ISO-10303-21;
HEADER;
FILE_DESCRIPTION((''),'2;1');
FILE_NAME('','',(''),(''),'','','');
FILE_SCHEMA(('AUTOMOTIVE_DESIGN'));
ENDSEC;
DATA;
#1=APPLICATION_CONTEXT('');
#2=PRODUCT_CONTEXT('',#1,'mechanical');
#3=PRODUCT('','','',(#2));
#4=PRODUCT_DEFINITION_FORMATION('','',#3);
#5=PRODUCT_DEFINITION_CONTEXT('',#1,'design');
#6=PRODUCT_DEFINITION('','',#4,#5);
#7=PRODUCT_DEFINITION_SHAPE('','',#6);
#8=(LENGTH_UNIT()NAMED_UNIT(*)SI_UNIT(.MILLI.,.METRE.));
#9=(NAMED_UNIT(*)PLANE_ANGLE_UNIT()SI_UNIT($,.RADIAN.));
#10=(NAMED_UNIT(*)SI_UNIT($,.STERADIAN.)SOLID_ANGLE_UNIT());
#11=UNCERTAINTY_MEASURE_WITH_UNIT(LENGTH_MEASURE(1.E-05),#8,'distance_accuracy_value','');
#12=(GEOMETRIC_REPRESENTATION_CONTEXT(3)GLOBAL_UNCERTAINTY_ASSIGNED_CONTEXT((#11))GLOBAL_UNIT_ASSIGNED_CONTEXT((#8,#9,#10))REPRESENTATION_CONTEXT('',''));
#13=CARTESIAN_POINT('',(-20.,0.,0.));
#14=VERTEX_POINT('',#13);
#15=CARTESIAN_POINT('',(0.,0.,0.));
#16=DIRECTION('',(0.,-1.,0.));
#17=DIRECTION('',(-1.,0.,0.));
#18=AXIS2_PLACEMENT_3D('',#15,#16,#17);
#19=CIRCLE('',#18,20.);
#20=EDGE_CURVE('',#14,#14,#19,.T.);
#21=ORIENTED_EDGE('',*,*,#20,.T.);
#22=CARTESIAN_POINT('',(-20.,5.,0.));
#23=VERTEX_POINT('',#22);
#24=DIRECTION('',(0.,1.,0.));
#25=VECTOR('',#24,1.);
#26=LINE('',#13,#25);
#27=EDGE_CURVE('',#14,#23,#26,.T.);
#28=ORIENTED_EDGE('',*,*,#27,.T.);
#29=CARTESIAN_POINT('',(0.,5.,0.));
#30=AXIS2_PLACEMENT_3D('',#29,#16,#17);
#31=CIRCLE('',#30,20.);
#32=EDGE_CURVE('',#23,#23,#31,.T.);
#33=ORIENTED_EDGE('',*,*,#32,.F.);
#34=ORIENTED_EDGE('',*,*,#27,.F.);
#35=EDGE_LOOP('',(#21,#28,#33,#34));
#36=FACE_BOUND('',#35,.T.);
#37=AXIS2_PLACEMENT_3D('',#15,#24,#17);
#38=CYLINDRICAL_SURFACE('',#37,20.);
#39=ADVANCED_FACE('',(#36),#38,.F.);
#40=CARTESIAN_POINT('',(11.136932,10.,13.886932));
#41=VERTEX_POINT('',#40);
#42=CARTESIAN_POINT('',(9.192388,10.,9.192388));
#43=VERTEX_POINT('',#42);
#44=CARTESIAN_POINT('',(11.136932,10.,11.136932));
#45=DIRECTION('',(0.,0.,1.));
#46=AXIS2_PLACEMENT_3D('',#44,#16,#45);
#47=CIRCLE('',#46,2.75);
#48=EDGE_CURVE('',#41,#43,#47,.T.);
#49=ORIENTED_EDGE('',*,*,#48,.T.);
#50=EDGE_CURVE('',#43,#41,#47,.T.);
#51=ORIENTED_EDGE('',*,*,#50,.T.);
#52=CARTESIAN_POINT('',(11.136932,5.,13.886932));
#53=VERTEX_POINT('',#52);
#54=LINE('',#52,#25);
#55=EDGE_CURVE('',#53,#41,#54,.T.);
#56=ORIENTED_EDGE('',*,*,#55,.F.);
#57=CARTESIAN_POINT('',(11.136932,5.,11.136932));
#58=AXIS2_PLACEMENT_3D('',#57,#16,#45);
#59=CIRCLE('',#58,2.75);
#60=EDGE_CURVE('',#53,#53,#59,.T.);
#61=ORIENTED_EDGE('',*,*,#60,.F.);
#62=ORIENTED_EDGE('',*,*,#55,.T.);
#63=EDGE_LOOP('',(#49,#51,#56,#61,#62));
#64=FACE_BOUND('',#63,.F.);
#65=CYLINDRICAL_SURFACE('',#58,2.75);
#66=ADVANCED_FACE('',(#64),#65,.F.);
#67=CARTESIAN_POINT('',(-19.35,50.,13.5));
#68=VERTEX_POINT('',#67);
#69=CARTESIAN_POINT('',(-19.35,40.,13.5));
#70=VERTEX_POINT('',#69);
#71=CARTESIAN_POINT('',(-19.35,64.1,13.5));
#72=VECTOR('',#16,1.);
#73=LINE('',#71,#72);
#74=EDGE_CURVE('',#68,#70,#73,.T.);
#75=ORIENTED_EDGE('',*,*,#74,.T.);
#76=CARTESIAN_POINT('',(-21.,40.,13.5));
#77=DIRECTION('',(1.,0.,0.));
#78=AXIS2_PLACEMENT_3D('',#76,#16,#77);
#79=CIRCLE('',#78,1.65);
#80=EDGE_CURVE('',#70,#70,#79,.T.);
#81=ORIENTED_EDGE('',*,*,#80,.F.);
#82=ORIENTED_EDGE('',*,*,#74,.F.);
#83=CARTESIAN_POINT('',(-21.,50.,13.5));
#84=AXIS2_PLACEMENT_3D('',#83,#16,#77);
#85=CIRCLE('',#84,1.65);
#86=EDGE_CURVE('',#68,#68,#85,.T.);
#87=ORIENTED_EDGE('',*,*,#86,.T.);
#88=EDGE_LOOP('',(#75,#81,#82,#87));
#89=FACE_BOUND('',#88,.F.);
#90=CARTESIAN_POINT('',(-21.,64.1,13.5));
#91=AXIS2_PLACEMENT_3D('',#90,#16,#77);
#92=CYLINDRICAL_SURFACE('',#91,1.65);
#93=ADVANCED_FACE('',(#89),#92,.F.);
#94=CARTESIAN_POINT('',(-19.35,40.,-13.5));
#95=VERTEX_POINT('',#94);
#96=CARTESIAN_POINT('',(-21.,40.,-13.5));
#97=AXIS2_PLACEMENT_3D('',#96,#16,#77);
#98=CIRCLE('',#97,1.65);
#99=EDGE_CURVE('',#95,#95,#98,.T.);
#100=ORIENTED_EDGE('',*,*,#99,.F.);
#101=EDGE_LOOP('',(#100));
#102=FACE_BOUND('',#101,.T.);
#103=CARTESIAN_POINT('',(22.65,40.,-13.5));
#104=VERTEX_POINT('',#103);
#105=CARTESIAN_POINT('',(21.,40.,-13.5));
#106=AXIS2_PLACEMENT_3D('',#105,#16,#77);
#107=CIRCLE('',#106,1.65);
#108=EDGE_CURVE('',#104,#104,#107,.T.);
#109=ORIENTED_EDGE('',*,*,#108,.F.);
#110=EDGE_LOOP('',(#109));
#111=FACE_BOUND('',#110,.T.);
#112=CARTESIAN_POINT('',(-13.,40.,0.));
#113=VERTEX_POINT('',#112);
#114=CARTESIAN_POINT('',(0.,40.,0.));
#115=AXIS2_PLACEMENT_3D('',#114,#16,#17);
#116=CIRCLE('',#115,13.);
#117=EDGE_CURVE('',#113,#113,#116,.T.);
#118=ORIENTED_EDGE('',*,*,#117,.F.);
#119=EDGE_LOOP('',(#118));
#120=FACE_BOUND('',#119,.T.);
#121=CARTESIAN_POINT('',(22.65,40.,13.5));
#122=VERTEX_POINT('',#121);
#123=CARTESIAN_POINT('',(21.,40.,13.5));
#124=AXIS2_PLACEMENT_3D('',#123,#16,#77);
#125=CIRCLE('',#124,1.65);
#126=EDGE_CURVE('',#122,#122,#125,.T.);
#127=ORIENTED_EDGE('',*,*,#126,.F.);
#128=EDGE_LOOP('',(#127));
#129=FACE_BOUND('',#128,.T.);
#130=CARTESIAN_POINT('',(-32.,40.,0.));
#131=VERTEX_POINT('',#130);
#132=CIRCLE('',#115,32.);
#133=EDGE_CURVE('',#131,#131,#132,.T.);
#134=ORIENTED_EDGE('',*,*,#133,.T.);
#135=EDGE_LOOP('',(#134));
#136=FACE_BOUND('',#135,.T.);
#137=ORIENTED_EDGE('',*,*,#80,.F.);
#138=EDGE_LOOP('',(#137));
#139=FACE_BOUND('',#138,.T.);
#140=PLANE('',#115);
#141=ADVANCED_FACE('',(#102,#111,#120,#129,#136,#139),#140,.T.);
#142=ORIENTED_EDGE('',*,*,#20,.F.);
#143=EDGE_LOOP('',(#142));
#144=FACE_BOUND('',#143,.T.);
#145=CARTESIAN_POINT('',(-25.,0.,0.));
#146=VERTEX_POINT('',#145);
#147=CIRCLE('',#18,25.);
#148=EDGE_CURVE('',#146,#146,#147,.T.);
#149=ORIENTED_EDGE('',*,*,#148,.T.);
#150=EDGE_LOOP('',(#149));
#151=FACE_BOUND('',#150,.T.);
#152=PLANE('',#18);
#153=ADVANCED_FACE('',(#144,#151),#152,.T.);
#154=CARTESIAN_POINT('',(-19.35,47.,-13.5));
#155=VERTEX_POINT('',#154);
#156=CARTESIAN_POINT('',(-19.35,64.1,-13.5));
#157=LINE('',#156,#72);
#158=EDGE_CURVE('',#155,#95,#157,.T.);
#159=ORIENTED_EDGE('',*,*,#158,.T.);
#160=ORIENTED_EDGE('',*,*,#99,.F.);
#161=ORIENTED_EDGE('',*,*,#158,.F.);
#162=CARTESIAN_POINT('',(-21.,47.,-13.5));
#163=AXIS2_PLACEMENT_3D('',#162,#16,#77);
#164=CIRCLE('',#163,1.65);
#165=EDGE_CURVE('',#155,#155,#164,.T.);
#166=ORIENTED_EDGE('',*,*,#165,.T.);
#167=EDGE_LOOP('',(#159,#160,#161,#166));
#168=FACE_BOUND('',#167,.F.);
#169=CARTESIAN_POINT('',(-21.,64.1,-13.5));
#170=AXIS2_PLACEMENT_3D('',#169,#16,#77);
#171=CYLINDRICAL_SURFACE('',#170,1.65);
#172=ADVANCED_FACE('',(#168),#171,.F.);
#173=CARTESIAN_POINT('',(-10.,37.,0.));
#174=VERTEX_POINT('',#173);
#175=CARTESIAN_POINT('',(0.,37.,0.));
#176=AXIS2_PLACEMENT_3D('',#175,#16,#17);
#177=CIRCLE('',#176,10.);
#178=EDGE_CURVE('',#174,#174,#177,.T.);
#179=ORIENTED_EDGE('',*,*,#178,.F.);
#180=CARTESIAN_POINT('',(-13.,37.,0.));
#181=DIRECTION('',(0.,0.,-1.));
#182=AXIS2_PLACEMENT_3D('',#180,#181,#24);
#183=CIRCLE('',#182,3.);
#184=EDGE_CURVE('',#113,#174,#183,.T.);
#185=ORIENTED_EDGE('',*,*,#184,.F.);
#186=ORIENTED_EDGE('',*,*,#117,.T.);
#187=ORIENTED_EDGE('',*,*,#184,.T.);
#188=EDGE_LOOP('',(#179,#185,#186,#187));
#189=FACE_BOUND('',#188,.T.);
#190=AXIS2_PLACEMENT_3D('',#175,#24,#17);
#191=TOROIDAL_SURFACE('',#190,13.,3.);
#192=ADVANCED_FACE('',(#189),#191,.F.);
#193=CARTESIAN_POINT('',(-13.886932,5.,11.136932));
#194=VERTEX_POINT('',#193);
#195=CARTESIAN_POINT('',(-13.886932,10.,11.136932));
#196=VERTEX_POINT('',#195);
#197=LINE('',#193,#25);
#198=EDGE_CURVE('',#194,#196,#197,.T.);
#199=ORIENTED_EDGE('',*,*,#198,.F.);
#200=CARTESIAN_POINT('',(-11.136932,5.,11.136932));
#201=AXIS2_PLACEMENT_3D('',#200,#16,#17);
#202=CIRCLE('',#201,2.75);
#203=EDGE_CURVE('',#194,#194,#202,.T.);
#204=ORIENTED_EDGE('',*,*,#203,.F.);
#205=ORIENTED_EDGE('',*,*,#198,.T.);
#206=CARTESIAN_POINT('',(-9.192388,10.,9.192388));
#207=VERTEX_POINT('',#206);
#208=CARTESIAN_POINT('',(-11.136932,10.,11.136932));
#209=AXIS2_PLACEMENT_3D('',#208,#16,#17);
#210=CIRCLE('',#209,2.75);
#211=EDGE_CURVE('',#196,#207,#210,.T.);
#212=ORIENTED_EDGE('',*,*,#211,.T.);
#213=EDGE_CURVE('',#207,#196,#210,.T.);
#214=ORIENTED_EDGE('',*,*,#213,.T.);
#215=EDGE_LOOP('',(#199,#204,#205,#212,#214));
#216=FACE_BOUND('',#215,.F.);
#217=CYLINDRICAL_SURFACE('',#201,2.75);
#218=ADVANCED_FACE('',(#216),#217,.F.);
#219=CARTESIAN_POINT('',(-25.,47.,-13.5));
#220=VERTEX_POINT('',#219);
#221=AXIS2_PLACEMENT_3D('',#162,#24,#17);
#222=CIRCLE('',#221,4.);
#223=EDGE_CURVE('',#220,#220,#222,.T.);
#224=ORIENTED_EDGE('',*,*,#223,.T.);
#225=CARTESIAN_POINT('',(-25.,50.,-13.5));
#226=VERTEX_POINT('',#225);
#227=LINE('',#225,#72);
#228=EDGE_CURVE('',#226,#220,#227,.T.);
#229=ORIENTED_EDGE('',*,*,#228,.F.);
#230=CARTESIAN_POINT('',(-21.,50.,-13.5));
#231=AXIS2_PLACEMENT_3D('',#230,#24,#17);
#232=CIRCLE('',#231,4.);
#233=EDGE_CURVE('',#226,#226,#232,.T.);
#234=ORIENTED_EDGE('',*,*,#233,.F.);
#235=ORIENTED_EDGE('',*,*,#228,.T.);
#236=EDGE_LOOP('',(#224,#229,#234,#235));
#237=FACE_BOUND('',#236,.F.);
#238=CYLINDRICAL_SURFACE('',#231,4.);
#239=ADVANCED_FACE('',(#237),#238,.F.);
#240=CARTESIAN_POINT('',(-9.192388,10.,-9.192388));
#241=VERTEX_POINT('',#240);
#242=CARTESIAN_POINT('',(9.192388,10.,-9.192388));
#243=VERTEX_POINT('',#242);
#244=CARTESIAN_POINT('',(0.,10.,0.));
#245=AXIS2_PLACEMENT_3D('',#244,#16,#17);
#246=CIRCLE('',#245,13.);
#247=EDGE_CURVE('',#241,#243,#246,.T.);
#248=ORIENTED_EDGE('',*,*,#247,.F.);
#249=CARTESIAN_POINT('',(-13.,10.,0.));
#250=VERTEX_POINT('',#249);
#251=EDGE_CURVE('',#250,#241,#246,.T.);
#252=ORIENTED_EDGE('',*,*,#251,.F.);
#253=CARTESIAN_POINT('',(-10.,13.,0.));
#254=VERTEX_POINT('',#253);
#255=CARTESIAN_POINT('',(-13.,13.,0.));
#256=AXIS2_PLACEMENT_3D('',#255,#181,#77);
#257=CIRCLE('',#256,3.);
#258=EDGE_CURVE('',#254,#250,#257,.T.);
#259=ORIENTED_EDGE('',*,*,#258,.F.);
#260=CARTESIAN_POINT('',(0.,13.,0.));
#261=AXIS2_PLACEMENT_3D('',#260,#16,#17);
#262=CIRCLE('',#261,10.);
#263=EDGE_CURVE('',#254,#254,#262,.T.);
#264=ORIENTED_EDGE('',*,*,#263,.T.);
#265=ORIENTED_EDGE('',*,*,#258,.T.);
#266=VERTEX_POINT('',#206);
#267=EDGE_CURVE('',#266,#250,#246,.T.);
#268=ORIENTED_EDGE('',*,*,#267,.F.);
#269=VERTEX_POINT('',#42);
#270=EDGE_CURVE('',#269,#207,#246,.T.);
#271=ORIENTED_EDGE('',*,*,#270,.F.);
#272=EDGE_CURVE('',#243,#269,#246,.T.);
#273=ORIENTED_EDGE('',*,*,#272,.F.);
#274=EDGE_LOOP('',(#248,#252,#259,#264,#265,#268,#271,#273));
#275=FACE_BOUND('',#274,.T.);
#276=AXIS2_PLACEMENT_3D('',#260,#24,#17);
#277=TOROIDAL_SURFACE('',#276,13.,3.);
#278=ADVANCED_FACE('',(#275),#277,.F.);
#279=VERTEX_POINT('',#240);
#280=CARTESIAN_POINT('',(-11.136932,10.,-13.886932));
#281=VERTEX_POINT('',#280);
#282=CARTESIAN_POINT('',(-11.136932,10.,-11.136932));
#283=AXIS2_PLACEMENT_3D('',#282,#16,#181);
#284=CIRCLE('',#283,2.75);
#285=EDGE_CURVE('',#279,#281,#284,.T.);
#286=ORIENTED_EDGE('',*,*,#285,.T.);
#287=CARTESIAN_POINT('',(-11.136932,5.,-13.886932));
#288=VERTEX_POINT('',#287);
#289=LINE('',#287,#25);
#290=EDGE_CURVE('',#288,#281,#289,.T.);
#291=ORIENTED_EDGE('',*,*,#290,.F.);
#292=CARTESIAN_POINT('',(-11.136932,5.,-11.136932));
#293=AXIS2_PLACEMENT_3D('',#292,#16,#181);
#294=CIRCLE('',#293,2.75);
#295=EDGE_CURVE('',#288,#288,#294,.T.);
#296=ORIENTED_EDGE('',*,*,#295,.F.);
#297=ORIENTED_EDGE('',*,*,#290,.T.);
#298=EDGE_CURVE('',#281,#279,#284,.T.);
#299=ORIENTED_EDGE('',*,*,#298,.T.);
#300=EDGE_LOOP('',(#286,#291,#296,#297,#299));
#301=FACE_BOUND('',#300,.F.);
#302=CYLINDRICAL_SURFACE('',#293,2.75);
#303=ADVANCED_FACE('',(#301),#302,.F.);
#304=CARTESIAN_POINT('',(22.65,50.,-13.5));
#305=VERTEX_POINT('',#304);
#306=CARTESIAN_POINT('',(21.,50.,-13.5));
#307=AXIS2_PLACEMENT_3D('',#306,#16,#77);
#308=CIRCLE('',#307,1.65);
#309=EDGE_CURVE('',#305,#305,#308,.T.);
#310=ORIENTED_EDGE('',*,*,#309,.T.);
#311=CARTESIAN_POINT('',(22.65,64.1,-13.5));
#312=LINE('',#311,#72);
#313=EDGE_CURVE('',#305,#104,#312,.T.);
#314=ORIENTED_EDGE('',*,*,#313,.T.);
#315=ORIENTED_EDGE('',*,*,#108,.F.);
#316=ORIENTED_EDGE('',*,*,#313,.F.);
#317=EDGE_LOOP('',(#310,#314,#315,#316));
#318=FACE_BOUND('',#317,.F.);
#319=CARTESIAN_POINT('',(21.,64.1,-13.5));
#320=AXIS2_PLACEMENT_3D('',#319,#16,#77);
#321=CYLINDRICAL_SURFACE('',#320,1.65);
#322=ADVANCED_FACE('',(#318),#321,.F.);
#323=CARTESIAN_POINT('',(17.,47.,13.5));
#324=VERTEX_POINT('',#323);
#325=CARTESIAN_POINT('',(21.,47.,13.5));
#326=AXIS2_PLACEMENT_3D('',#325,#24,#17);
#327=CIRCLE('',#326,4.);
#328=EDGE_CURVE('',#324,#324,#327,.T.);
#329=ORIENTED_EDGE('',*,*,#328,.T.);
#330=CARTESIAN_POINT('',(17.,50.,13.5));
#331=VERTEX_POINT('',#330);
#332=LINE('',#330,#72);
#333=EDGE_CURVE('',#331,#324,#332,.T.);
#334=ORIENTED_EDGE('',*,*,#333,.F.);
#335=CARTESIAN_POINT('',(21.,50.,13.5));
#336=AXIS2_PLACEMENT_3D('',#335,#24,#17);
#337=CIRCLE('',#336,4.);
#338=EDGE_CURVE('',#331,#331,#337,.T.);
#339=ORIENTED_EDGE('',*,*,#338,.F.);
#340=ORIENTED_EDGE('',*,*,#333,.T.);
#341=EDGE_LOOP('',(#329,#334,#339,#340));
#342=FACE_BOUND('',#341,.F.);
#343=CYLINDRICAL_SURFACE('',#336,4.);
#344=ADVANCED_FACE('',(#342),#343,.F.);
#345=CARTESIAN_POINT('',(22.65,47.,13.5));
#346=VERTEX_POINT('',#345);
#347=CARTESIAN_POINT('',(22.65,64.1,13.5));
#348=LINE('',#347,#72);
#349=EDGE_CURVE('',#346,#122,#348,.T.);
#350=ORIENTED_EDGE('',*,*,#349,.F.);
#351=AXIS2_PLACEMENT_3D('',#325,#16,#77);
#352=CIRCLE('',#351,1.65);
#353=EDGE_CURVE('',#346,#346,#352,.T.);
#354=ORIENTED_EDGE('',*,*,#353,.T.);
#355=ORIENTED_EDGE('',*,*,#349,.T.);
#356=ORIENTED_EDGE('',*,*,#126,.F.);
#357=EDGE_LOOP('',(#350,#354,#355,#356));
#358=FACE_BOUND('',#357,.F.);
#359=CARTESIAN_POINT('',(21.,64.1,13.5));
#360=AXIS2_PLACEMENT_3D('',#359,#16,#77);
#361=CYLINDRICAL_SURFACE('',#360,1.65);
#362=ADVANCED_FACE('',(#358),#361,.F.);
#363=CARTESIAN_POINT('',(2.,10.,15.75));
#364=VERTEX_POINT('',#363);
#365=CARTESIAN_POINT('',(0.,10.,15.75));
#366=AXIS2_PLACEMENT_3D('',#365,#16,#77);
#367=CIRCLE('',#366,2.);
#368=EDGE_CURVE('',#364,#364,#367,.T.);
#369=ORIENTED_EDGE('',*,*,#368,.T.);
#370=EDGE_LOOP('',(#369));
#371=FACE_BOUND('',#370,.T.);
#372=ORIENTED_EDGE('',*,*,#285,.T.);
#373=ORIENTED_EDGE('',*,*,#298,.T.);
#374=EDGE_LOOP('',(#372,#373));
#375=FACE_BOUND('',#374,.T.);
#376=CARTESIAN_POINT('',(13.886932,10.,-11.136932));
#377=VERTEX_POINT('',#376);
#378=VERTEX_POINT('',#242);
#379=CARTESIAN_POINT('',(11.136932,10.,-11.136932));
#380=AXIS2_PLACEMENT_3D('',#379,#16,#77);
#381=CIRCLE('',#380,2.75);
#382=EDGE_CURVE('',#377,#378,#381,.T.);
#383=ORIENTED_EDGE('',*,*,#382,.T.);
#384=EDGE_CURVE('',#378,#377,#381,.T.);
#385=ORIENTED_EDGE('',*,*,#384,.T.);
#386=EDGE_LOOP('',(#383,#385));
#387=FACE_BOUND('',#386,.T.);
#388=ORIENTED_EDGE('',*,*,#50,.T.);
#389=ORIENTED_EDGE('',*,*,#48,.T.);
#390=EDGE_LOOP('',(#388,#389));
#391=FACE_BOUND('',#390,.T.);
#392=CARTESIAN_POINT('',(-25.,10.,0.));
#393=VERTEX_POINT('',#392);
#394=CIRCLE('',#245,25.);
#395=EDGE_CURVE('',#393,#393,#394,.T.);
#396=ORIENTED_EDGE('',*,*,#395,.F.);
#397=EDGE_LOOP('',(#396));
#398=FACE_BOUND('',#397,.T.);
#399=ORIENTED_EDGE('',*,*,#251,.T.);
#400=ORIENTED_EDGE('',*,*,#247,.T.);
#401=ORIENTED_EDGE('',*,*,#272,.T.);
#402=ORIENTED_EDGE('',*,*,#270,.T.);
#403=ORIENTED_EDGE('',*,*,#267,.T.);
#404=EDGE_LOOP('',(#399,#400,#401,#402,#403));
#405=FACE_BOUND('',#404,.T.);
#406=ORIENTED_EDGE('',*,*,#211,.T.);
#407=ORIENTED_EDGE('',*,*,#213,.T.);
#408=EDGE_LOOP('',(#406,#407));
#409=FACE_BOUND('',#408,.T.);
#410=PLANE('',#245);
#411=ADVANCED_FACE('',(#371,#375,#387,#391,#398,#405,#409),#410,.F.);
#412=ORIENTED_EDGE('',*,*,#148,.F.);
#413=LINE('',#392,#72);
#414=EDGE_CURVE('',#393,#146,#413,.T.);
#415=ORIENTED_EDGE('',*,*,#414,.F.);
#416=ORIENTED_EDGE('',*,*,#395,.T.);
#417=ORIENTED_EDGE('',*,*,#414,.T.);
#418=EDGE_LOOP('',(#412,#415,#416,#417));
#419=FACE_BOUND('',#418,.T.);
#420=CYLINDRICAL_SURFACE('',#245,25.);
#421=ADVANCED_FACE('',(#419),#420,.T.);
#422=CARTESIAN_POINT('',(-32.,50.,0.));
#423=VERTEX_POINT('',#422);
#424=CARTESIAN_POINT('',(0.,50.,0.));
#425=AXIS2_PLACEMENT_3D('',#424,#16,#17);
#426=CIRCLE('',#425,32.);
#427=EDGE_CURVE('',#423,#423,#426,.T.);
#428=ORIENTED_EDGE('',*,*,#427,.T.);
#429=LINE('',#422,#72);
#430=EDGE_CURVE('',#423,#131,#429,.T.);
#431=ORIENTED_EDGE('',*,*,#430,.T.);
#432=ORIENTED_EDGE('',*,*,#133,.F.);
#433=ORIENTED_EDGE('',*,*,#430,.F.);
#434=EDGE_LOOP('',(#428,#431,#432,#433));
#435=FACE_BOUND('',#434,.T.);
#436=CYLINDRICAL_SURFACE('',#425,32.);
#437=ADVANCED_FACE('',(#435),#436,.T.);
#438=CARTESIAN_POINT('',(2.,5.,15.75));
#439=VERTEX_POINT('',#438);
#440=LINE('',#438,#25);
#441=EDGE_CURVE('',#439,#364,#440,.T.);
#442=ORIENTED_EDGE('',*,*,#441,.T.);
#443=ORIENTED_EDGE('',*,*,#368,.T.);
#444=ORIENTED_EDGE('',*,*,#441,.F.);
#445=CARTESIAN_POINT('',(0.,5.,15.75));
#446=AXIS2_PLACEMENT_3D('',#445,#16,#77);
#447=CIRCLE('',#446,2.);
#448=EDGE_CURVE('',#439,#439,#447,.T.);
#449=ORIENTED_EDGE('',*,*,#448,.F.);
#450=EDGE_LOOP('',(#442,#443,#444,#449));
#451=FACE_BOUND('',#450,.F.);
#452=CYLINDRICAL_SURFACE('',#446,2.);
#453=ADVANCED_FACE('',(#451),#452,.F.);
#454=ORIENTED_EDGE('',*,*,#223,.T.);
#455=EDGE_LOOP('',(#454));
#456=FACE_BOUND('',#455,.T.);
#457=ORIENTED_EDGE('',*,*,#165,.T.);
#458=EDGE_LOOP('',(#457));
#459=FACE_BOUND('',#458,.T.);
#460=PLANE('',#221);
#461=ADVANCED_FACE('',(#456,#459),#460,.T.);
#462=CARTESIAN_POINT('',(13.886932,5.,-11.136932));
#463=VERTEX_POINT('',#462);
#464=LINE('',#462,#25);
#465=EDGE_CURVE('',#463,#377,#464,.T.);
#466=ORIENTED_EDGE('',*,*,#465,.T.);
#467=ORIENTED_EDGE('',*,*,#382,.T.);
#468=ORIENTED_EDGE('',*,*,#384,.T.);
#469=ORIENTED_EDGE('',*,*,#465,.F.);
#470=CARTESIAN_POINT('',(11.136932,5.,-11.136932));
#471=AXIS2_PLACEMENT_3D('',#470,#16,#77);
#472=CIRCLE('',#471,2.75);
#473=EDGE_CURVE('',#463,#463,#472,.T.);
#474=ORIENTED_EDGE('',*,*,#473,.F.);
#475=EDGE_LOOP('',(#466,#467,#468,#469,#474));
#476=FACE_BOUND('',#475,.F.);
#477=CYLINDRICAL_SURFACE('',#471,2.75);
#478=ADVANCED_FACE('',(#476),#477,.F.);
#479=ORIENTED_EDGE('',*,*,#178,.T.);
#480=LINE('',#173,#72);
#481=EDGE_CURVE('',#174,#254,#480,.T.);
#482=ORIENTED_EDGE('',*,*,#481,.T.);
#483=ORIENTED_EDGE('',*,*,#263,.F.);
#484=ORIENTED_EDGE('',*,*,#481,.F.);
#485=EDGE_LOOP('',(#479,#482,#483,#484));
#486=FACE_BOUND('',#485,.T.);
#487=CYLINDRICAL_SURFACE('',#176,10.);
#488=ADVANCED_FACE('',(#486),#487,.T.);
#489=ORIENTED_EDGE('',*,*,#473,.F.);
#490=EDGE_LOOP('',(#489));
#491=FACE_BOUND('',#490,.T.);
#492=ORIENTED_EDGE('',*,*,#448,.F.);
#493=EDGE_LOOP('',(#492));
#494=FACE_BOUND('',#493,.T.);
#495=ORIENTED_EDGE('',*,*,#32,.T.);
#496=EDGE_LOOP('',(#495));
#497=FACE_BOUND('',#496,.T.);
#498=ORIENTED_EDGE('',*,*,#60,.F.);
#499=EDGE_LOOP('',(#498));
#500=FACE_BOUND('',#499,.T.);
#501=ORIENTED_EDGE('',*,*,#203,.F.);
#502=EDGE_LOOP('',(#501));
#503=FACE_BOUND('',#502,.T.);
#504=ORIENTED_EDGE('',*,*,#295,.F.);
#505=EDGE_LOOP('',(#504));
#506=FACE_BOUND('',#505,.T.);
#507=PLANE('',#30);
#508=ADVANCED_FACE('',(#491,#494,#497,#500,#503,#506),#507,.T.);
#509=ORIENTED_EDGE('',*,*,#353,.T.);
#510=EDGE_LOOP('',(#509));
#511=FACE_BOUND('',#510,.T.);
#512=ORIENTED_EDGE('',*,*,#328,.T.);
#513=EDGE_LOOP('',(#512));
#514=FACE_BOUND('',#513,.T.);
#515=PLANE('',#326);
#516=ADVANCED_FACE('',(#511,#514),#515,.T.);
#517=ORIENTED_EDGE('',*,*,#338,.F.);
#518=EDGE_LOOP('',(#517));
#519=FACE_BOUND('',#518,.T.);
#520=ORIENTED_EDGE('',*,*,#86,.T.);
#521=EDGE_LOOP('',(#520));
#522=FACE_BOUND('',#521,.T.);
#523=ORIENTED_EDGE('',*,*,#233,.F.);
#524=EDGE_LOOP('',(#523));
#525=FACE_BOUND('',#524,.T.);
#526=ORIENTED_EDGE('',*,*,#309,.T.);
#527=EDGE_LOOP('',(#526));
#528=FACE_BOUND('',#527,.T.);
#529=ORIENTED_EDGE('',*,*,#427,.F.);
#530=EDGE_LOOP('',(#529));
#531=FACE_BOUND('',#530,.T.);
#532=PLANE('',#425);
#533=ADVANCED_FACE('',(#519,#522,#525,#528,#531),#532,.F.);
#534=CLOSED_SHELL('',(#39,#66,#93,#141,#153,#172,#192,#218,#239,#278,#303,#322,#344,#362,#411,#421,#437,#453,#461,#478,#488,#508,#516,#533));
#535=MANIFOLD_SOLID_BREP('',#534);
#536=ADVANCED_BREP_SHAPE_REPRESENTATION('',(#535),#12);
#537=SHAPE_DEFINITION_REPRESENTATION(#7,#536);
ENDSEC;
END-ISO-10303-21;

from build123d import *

# Parameters (mm, degrees)
F3_D            = 3.3
F3_DEPTH        = 14.1
F3_TIP          = 0.9914200214
F2_R            = 4
F4_DEPTH        = 3
F5_R            = 2.75
F6_DEPTH        = 25
F6_COPIES_COUNT = 4
F8_R            = 2
F9_DEPTH        = 25


# Not quite as in the source:
# - a pattern or mirror of a feature is missing from the dataset's text; its kind, count and spacing are read off the source's solid


with BuildPart() as f1:
    # F0 (on Top) → F1 (revolve)
    with BuildSketch(Plane.XY):
        with BuildLine():
            Line((-25, 0), (-20, 0))
            Line((-20, 0), (-20, 5))
            Line((-20, 5), (0, 5))
            Line((0, 5), (0, 50))
            Line((0, 50), (-32, 50))
            Line((-32, 50), (-32, 40))
            Line((-32, 40), (-13, 40))
            ThreePointArc((-13, 40), (-10.8786796564, 39.1213203436), (-10, 37))
            Line((-10, 37), (-10, 13))
            ThreePointArc((-10, 13), (-10.8786796564, 10.8786796564), (-13, 10))
            Line((-13, 10), (-25, 10))
            Line((-25, 10), (-25, 0))
        make_face()
    revolve(axis=Axis((0, 27.5, 0), (0, -1, 0)))

    # F3
    with Locations(Plane(origin=(0, 50, 0), x_dir=(-1, 0, 0), z_dir=(0, 1, 0))):
        with Locations((21, -13.5), (21, 13.5), (-21, 13.5), (-21, -13.5)):
            Hole(F3_D / 2, depth=F3_DEPTH)
            with Locations((0, 0, -(F3_DEPTH + F3_TIP / 2))):  # 118° drill point
                Cone(0, F3_D / 2, F3_TIP, mode=Mode.SUBTRACT)

    # F2 (on face) → F4 (cut)
    with BuildSketch(Plane(origin=(0, 50, 0), x_dir=(-1, 0, 0), z_dir=(0, 1, 0))):
        with Locations((21, -13.5)):
            Circle(F2_R)
        with Locations((-21, 13.5)):
            Circle(F2_R)
    extrude(amount=-F4_DEPTH, mode=Mode.SUBTRACT)

    # F5 (on face) → F6 (cut)
    with BuildSketch(Plane.XZ.offset(-5)):
        with Locations((11.1369318037, -11.1369318037)):
            Circle(F5_R)
    f6 = extrude(amount=-F6_DEPTH, mode=Mode.SUBTRACT)

    # F6_copies: F6 ×4 about axis
    f6_copies_axis = Axis((0, 0, 0), (0, 1, 0))
    for i in range(1, F6_COPIES_COUNT):
        add(f6.rotate(f6_copies_axis, i * 360 / F6_COPIES_COUNT), mode=Mode.SUBTRACT)

    # F8 (on face) → F9 (cut)
    with BuildSketch(Plane.XZ.offset(-5)):
        with Locations((0, 15.75)):
            Circle(F8_R)
    extrude(amount=-F9_DEPTH, mode=Mode.SUBTRACT)


solid = f1.part
